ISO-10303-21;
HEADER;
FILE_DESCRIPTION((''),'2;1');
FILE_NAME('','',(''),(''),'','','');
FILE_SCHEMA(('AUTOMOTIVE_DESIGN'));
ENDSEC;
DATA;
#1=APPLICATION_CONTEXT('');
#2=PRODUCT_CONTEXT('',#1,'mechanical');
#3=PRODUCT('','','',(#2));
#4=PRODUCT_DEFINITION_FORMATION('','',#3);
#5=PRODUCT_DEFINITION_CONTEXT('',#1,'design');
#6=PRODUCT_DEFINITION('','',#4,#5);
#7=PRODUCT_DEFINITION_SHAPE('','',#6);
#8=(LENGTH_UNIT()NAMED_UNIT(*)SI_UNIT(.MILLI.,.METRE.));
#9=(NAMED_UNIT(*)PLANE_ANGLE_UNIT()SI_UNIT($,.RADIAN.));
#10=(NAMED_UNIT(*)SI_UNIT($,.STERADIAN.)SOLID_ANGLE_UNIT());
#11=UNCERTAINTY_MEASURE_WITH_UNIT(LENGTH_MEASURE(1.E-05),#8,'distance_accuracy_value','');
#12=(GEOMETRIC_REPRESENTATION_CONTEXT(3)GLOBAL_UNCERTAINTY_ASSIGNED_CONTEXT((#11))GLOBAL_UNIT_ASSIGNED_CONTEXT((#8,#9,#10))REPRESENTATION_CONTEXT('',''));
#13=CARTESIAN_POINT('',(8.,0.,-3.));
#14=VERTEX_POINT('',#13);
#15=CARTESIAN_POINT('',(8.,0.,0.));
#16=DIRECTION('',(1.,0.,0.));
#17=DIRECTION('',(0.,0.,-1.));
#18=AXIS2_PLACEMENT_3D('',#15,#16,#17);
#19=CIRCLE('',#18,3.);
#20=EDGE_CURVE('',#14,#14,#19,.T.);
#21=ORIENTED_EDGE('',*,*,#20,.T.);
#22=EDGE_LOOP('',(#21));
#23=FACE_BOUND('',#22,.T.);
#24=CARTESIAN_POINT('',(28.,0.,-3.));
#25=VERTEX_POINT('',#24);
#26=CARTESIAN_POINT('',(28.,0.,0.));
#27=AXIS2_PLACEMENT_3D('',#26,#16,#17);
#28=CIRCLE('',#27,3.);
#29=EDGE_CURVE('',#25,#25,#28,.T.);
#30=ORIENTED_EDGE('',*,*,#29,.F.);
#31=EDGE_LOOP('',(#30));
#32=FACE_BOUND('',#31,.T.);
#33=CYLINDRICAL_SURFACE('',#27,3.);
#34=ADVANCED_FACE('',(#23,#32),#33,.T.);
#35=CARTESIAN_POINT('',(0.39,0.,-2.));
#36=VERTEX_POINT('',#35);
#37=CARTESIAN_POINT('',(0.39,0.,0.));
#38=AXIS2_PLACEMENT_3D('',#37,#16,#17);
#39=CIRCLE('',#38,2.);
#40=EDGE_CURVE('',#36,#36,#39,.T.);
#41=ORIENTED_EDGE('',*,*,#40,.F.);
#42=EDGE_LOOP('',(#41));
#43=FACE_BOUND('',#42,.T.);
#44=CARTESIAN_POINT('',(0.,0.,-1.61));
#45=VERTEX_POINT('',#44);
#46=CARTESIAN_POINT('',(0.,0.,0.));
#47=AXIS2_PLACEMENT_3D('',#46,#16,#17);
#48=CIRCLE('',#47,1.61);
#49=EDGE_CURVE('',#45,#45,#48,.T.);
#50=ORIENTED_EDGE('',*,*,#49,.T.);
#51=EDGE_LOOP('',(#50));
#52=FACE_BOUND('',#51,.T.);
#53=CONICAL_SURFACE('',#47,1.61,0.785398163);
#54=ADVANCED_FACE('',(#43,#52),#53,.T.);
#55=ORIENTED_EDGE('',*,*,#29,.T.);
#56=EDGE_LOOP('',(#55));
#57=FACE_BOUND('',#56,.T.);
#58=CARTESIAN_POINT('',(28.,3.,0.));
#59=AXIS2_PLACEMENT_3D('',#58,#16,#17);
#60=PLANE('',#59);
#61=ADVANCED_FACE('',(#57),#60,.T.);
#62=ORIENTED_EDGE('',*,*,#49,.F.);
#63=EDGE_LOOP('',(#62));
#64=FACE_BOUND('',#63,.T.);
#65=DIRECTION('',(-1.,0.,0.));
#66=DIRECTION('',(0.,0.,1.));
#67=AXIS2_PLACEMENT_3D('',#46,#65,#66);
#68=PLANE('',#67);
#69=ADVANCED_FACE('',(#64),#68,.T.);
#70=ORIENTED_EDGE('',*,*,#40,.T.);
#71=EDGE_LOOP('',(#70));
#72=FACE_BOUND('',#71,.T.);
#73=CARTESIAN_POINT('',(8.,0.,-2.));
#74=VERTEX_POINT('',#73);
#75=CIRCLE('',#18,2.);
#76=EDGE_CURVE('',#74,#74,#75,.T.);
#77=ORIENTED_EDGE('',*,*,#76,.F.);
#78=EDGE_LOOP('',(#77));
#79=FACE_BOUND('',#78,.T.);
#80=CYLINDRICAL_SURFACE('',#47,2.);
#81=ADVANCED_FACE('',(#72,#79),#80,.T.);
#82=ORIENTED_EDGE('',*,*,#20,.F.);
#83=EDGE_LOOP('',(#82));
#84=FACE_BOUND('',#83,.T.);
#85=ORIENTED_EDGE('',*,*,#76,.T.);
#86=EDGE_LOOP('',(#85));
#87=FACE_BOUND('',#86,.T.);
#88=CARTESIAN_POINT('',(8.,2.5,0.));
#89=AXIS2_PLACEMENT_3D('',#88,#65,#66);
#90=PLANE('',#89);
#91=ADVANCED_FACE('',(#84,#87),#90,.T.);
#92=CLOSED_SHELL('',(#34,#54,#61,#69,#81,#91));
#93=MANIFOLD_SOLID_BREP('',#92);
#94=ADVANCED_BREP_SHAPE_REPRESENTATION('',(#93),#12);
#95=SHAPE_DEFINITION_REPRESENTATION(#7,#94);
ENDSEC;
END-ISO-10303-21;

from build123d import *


# Read off the part's stored shape, not the designer's step: M4 Machine Threads Stud1
with BuildPart() as part:
    # Sketch1 → Revolve1 (revolve)
    with BuildSketch(Plane.XY, mode=Mode.PRIVATE) as revolve1_sk:
        Polygon((0, 0), (0, 2.5), (8, 2.5), (8, 3), (28, 3), (28, 0), align=None)
    revolve(revolve1_sk.sketch.rotate(Axis((28, 0, 0), (-1, 0, 0)), 90), axis=Axis((28, 0, 0), (-1, 0, 0)))

    # M4 Machine Threads Stud1 outline → M4 Machine Threads Stud1 (revolve, cut)
    with BuildSketch(Plane.YX):
        Polygon((2.5, 8), (2, 8), (2, 0.39), (1.61, 0), (2.5, 0), align=None)
    revolve(axis=Axis((0, 0, 0), (1, 0, 0)), mode=Mode.SUBTRACT)


solid = part.part
